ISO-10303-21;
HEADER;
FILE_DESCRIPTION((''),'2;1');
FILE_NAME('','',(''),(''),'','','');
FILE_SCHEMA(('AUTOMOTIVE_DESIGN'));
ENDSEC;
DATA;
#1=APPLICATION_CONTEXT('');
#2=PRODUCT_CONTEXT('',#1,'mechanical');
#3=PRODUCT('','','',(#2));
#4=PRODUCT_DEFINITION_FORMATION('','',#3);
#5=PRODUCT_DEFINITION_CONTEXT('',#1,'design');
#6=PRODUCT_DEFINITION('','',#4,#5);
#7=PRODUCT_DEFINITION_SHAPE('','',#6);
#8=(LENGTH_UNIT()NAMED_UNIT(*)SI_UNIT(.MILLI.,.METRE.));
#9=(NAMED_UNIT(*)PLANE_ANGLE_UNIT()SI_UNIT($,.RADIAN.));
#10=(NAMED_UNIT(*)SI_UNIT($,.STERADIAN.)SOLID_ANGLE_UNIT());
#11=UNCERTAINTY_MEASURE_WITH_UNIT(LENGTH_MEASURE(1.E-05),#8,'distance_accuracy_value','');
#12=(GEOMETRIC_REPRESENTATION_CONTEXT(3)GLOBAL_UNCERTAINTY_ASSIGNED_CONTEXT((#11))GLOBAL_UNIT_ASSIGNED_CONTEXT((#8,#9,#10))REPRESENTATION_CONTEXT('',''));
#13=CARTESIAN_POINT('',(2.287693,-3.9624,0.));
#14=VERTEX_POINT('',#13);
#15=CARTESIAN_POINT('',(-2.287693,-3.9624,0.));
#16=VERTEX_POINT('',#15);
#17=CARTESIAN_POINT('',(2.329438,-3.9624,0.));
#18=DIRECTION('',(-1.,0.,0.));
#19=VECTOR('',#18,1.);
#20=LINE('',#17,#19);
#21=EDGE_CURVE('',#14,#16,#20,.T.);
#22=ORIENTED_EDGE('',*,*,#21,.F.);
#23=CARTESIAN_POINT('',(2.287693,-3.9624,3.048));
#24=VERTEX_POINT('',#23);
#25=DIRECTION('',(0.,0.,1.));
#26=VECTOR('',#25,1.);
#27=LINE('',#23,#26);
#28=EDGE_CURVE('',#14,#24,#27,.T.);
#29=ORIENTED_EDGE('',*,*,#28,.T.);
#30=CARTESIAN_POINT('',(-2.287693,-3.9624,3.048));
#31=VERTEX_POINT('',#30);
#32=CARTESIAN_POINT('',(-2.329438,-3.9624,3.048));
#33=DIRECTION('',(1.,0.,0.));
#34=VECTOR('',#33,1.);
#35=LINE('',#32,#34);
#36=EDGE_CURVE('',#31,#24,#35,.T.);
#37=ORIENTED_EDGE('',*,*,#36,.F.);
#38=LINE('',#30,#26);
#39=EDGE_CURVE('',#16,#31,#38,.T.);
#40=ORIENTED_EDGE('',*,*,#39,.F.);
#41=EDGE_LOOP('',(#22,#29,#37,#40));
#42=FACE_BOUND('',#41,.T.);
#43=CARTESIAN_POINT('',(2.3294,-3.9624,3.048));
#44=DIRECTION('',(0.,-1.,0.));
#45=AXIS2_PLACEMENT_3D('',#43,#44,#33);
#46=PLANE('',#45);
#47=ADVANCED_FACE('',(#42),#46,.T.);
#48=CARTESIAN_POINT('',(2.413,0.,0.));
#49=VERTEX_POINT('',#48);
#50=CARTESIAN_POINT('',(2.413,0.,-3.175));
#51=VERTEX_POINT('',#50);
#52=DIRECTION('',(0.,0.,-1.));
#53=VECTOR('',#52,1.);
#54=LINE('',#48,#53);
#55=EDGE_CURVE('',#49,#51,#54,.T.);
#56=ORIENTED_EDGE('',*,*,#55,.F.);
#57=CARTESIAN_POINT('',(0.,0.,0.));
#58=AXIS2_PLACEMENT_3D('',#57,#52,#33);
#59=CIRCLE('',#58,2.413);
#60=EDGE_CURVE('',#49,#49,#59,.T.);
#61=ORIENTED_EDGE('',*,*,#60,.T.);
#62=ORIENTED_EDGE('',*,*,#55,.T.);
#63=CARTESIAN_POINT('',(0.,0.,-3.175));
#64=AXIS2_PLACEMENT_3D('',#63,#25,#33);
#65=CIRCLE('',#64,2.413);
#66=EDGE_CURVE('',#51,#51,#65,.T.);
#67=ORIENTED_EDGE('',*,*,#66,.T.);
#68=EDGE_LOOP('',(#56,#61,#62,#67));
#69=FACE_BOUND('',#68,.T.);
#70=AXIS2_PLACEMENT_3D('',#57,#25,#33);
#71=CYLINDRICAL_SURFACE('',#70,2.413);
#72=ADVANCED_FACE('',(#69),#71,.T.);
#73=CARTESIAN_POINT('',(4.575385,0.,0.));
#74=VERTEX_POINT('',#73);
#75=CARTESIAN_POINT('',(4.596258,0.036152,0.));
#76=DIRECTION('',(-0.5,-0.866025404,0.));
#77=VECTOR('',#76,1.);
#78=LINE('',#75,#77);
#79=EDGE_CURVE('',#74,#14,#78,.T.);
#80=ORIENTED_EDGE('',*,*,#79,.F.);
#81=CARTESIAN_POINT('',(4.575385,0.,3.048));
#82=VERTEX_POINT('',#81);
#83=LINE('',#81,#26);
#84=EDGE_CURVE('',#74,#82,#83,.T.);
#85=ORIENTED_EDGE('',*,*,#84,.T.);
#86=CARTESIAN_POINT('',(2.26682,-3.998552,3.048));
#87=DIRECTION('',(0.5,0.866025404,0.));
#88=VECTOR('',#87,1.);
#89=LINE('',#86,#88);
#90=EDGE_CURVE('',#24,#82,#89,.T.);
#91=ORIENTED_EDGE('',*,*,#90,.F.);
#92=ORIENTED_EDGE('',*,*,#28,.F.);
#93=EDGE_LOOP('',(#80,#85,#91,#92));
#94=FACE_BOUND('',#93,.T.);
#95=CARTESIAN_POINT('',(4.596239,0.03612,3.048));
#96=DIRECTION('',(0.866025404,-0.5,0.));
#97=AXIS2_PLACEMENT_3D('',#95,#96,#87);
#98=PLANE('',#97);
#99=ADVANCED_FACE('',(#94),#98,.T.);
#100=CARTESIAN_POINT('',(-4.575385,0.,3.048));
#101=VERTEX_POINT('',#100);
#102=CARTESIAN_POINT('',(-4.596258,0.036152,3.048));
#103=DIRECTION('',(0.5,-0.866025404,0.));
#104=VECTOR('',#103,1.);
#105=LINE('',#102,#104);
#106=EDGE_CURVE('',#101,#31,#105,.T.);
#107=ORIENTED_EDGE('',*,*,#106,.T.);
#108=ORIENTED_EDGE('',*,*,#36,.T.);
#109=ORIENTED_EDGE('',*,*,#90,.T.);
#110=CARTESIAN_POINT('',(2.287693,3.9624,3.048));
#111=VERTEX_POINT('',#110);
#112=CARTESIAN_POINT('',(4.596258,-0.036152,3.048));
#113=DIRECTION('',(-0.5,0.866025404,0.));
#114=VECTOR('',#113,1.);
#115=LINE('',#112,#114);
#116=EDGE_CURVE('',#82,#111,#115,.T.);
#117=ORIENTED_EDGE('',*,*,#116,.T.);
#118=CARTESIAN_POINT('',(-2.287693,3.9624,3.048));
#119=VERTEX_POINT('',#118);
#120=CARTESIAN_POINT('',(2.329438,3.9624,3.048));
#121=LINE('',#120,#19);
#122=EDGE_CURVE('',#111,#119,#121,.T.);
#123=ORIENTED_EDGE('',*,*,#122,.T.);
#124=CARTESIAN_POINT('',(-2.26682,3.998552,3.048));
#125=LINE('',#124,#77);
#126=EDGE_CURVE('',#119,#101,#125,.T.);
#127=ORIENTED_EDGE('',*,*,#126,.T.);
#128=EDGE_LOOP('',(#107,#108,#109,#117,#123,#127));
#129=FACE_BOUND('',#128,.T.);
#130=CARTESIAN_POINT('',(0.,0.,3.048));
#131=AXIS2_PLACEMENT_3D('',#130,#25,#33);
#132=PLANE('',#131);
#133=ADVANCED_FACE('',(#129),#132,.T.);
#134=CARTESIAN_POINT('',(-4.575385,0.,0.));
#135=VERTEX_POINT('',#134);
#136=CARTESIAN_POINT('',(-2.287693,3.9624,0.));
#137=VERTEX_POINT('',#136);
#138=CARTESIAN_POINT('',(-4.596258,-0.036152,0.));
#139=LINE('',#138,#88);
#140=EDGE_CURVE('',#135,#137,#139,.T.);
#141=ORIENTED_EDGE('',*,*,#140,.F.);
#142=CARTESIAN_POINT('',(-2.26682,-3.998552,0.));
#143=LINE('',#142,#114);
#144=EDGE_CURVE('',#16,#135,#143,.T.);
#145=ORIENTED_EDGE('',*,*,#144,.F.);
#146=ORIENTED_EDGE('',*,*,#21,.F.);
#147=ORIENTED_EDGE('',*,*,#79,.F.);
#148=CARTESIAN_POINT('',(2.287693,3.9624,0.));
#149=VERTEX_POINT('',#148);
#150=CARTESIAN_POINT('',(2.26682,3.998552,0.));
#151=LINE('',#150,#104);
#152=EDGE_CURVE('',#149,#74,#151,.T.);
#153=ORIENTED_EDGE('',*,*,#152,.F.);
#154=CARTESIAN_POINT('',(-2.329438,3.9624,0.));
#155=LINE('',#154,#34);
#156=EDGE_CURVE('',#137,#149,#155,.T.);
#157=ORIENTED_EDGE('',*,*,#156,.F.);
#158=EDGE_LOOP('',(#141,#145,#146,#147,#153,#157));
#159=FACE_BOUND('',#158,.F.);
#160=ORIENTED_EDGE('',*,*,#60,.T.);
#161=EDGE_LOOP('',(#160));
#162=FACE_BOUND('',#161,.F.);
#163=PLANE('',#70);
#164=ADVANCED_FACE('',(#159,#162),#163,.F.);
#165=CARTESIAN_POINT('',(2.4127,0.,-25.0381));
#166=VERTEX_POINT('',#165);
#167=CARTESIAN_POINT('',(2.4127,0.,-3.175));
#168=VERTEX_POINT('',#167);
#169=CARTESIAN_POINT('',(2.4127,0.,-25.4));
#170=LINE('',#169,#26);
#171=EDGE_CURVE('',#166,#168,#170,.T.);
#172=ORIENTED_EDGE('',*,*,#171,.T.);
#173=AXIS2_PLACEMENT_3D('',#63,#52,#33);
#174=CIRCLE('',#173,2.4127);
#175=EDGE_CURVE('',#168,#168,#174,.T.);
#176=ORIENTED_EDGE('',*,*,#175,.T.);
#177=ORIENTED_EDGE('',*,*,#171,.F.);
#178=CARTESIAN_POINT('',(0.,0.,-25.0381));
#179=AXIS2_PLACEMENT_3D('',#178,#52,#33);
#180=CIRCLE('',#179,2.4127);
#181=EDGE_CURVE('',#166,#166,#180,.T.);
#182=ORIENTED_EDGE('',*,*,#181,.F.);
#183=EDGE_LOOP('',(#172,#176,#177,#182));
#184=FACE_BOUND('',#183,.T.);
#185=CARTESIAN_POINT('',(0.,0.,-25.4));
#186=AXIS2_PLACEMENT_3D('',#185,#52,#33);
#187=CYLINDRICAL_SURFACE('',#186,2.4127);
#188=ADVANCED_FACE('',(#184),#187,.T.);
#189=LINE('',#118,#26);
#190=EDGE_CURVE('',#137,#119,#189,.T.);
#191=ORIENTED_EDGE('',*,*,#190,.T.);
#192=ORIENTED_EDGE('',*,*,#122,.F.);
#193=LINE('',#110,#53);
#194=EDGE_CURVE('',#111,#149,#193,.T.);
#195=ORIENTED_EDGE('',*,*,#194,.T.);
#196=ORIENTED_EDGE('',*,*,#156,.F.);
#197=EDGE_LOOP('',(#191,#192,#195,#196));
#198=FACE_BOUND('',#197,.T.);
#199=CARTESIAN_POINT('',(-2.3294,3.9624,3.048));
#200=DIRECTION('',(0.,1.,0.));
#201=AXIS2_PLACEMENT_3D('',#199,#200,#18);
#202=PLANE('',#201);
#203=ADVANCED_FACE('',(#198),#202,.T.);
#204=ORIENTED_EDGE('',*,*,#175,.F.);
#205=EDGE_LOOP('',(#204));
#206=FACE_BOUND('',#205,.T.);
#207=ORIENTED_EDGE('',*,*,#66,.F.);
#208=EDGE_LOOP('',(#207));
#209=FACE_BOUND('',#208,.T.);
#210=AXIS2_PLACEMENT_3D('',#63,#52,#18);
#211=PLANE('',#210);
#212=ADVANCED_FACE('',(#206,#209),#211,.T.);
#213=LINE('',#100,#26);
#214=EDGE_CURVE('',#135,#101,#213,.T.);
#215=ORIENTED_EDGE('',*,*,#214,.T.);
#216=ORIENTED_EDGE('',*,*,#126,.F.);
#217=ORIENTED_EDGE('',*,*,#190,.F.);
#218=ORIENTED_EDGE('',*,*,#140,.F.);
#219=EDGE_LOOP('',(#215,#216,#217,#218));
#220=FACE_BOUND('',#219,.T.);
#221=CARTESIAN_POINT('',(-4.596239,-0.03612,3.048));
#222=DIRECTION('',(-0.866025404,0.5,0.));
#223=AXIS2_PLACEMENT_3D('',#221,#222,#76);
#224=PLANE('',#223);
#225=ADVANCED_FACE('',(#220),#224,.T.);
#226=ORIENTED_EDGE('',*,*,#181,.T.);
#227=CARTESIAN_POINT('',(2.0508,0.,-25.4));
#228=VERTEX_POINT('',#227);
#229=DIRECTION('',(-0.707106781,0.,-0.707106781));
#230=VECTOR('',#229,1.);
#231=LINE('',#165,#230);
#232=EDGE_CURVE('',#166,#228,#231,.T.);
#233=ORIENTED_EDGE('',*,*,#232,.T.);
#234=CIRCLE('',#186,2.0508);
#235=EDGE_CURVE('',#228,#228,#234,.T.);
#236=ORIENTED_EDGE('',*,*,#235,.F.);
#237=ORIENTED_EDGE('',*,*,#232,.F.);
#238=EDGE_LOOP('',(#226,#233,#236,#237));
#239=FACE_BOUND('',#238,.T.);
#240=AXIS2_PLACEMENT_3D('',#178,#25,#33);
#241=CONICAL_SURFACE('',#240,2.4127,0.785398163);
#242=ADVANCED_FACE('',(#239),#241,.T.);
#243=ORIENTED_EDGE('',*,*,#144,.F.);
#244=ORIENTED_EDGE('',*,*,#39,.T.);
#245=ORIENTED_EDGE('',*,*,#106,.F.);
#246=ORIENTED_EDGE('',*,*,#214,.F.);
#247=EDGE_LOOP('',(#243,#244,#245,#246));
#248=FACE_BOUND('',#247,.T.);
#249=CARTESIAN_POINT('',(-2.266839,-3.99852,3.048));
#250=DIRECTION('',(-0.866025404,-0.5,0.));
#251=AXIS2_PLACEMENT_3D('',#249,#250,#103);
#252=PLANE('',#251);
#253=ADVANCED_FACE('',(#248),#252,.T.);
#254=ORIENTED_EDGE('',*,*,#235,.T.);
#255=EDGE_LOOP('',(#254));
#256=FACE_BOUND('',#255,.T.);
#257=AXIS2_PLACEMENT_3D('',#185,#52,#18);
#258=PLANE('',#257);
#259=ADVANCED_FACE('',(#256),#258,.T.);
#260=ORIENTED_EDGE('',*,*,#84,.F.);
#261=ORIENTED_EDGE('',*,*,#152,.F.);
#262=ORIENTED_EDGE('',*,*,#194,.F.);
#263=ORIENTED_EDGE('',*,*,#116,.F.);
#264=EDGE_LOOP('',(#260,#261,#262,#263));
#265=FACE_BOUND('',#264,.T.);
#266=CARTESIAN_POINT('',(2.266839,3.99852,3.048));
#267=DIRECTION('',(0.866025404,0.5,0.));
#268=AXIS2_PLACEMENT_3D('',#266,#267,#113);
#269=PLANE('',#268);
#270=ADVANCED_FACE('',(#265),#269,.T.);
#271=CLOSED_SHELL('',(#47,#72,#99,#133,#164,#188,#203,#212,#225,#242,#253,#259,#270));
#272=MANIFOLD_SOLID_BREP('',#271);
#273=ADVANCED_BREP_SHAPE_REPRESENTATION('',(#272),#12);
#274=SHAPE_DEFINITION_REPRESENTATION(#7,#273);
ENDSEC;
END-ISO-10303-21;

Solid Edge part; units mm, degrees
sketch "Sketch1" plane through (0, 0, 0) normal (0, 0, 1) x (1, 0, 0)
  circle A0 centre (0, 0) radius 4.5964
  dimension "D1" = 9.1928
extrude "Protrusion1" add sketch "Sketch1" along normal blind 3.048
sketch "Sketch2" plane through (0, 0, 0) normal (0, 0, -1) x (1, 0, 0)
  circle A0 centre (0, 0) radius 2.413
extrude "Protrusion2" add sketch "Sketch2" along normal blind 25.4
sketch "Sketch3" plane through (0, 0, -25.4) normal (0, 0, -1) x (1, 0, 0)
  circle A0 centre (0, 0) radius 2.4127
extrude "Cutout1" cut sketch "Sketch3" against normal blind 22.225 flip side to cut
chamfer "Chamfer_1" distance 0.3619 angle 45 1 edges at (-2.4127, 0, -25.4)
sketch "Sketch4" plane through (0, 0, 3.048) normal (0, 0, 1) x (1, 0, 0)
  line L0 (-2.3294, 3.9624) -> (2.3294, 3.9624)
  dimension "D1" = 7.9248
extrude "Cutout2" cut sketch "Sketch4" against normal up to next material side at (0, 4.0124, 3.048)
pattern_circular "Pattern1" count 6 over 360 about axis through (0, 0, 3.048) along (0, 0, 1) of "Cutout2"
properties part number "116968"
